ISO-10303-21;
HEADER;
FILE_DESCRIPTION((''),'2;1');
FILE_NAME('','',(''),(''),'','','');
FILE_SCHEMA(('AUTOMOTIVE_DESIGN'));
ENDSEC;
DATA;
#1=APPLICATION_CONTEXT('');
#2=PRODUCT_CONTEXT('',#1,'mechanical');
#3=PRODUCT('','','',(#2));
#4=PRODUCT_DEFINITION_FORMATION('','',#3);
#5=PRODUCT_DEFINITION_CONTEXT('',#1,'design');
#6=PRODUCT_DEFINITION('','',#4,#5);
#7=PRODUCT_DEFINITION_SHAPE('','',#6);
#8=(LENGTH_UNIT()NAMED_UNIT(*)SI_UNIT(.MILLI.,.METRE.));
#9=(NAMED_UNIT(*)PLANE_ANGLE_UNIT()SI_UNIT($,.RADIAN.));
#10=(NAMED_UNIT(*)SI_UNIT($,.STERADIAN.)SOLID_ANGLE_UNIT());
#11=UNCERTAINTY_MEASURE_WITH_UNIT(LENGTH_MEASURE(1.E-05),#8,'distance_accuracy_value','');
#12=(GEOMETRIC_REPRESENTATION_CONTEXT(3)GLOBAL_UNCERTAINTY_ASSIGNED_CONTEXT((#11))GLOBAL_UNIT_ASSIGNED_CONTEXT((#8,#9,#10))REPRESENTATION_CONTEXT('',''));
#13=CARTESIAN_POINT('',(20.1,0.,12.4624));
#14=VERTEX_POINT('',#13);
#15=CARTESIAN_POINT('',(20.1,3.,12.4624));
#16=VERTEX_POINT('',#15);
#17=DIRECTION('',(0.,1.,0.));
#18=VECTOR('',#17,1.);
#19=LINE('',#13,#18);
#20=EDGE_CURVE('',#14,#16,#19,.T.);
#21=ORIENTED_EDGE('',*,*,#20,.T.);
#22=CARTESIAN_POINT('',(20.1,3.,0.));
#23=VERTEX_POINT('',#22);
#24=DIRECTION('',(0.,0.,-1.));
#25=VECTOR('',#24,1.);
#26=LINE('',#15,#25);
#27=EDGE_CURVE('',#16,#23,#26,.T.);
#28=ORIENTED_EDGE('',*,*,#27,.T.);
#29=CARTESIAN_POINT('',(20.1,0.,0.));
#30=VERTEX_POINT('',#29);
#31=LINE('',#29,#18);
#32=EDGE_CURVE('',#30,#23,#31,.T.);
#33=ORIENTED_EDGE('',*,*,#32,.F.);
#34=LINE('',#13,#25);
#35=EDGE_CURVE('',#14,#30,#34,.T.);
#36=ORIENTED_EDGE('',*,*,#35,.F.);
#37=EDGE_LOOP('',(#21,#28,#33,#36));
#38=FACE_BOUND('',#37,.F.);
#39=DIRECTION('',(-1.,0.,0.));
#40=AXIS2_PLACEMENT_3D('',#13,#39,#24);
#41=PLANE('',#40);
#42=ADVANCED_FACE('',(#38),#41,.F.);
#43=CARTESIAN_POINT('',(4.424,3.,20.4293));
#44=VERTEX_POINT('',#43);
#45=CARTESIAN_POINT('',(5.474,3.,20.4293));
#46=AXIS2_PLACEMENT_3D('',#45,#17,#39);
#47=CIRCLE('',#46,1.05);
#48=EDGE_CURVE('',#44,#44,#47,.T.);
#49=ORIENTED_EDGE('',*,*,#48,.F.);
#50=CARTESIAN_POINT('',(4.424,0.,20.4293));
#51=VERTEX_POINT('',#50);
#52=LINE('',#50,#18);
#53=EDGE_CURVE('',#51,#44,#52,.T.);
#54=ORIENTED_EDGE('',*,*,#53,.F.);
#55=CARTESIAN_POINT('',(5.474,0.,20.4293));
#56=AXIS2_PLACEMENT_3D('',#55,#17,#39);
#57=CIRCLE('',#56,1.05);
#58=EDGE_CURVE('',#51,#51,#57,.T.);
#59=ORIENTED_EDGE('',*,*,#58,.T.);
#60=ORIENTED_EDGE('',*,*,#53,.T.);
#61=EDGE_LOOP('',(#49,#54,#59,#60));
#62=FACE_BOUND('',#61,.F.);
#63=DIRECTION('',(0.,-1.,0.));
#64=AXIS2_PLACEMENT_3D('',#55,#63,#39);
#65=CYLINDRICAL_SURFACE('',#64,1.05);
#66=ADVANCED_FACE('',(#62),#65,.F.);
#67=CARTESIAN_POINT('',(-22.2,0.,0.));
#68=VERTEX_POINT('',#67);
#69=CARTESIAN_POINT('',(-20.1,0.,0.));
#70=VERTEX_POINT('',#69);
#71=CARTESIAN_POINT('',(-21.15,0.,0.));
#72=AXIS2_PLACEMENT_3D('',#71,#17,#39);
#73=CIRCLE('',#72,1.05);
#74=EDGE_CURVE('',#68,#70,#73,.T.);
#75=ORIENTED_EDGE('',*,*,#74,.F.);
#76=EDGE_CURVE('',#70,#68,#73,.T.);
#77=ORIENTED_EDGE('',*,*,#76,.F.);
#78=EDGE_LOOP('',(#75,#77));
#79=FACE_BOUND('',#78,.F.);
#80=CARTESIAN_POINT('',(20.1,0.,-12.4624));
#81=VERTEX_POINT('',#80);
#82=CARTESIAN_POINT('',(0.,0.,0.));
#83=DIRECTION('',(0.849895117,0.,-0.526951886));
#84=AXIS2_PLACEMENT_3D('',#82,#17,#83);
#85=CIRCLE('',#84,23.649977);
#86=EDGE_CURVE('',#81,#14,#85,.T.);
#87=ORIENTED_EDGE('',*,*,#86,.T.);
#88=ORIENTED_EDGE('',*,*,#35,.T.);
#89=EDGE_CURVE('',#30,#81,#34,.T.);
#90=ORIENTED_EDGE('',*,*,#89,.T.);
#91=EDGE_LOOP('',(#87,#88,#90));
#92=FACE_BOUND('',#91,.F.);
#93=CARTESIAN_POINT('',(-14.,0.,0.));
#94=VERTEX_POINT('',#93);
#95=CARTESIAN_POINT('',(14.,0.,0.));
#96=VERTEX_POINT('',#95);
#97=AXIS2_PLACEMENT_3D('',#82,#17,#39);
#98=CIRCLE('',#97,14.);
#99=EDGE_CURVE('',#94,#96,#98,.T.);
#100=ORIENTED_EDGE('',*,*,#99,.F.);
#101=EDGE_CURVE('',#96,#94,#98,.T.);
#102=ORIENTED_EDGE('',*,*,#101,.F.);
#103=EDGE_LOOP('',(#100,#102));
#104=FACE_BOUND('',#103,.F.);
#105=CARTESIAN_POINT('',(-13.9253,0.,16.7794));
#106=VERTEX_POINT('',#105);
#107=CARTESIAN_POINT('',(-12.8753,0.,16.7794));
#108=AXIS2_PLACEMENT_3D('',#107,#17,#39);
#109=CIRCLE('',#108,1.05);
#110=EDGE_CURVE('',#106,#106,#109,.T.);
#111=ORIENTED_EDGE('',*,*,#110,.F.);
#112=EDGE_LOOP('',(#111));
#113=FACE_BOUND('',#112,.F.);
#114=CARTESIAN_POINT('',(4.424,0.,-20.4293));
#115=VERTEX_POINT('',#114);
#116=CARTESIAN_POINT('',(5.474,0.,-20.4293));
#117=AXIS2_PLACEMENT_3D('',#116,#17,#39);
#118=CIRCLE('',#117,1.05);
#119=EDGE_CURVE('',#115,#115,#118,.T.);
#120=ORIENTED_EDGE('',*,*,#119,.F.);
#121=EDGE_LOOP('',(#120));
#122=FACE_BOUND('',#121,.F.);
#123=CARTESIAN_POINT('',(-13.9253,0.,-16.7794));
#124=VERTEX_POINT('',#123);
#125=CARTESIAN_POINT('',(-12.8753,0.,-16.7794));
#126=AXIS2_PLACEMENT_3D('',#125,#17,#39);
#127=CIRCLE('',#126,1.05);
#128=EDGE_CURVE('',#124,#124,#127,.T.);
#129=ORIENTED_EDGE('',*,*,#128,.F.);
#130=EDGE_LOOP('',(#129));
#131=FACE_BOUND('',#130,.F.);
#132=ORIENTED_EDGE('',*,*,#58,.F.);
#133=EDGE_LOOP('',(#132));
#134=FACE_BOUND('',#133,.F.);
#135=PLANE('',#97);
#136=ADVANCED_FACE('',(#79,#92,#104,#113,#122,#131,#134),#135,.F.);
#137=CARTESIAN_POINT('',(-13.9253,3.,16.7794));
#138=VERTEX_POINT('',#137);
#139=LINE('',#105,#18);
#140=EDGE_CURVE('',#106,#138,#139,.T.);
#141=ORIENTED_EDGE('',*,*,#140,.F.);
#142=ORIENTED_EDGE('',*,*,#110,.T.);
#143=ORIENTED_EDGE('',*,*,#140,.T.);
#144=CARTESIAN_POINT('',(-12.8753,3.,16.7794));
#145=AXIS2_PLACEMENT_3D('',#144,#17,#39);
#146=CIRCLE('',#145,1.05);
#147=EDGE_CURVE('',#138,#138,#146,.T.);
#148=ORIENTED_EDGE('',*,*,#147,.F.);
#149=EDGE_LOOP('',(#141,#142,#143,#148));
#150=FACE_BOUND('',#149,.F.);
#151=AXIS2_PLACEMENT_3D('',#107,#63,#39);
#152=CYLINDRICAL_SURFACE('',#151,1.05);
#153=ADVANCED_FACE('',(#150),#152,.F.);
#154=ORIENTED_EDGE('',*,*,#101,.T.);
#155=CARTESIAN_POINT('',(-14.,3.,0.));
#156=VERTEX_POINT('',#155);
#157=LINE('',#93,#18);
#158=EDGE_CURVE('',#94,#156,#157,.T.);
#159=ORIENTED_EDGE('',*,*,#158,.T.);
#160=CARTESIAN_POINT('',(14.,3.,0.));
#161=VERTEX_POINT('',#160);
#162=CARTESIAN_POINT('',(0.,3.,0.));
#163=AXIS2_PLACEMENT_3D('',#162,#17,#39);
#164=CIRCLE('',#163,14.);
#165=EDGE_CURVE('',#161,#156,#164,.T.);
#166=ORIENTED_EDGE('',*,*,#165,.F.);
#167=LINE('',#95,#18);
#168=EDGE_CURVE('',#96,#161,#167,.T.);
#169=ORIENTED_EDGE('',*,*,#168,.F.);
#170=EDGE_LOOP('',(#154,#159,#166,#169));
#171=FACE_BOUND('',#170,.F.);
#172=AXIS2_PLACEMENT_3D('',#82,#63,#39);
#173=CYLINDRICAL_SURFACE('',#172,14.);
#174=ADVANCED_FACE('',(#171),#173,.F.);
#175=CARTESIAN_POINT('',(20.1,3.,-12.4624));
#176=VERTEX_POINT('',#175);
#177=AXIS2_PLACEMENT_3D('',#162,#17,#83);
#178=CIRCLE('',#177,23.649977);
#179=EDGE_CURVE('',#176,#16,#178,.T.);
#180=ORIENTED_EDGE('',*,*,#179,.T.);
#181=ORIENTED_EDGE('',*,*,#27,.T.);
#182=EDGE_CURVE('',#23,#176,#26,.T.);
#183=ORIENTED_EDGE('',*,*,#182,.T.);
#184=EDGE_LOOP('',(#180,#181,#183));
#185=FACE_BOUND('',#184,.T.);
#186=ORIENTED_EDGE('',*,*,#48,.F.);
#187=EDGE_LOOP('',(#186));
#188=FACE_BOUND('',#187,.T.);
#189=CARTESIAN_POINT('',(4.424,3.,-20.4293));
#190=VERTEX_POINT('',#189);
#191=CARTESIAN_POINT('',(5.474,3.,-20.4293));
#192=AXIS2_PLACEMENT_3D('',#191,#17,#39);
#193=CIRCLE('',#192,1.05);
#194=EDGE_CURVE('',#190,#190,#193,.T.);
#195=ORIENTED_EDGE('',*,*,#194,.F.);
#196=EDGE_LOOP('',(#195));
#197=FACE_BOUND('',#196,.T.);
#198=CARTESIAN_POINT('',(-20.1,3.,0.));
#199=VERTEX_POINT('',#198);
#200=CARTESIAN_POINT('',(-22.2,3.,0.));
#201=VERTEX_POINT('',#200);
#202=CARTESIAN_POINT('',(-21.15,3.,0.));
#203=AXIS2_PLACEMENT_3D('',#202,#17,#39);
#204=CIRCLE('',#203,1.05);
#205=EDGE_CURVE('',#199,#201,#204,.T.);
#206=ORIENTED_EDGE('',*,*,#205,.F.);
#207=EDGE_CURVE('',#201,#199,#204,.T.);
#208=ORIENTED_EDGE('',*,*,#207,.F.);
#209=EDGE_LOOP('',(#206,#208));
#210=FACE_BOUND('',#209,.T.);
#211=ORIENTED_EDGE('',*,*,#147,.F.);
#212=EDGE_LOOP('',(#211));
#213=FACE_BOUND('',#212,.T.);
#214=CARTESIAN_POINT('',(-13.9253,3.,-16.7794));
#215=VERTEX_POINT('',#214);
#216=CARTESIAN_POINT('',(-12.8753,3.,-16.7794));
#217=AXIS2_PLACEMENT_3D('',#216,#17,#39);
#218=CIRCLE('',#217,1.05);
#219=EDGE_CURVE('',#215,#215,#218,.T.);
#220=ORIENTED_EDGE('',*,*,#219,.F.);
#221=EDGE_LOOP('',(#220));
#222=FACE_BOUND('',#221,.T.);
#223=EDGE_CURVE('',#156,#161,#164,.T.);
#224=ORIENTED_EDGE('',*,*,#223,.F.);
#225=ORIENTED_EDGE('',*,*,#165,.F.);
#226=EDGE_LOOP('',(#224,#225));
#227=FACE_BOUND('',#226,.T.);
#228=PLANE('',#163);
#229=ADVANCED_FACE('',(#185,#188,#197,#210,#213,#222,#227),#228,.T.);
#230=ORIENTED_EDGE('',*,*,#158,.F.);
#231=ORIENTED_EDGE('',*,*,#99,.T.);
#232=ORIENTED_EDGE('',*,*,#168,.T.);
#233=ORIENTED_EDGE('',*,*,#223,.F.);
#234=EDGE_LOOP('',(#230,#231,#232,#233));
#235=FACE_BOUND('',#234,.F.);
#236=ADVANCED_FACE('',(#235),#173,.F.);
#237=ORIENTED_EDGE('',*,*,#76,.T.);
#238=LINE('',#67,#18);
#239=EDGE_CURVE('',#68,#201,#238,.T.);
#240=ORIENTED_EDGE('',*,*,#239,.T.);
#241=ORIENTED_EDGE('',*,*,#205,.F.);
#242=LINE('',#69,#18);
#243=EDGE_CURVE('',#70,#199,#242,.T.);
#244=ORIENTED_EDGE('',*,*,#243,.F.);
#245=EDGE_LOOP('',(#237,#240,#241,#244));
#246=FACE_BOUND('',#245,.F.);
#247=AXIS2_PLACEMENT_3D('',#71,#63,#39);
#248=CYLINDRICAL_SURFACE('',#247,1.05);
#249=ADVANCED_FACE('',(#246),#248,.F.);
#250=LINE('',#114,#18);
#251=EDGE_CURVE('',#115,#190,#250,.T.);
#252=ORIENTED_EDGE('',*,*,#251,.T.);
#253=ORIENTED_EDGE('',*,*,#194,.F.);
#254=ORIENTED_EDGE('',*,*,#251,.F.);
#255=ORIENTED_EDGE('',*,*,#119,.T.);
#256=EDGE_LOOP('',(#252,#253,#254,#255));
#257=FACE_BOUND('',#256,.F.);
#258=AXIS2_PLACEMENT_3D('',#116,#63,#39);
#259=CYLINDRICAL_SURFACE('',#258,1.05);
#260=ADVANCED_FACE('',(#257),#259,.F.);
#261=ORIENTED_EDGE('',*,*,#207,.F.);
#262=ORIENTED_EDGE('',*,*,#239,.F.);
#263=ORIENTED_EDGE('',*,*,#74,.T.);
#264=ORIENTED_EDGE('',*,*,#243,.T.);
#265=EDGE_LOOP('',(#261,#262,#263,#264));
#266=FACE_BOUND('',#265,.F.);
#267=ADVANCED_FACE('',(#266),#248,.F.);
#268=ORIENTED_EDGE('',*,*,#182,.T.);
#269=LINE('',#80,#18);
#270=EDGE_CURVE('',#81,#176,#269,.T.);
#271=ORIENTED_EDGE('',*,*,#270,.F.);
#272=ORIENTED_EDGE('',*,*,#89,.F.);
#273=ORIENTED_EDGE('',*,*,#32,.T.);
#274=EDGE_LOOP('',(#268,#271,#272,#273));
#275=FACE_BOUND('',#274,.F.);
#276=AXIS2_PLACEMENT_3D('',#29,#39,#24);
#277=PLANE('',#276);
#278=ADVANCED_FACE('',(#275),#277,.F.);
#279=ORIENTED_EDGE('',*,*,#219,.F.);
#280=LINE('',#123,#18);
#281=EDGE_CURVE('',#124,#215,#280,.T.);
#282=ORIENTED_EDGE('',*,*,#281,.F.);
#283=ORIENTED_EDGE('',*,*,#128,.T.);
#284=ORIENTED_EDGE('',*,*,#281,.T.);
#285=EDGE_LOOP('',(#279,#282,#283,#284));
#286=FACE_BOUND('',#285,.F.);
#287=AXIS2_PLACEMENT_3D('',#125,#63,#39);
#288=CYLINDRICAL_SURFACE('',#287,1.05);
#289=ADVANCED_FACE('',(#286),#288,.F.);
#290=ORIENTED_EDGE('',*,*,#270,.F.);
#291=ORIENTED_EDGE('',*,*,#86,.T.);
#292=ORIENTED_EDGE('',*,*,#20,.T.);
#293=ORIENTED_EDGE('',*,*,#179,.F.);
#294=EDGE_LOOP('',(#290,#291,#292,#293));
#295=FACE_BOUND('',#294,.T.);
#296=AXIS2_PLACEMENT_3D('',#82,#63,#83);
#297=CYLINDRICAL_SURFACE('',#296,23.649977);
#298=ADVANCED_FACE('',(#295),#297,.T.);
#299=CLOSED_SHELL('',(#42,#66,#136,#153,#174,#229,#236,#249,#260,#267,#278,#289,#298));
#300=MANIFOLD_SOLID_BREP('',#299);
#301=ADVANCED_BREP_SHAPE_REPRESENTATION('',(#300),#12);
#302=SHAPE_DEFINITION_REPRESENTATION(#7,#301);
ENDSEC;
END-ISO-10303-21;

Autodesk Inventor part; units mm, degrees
ref_plane "YZ Plane" through (0, 0, 0) normal (1, 0, 0) x (0, 1, 0)
ref_plane "XZ Plane" through (0, 0, 0) normal (0, 1, 0) x (-1, 0, 0)
ref_plane "XY Plane" through (0, 0, 0) normal (0, 0, 1) x (1, 0, 0)
sketch "Эскиз1" plane through (0, 0, 0) normal (0, 1, 0) x (-1, 0, 0)
  circle A0 centre (0, 0) radius 14
  arc A1 (-20.1, -12.4624) -> (-20.1, 12.4624) centre (0, 0) ccw
  line L0 (-20.1, 12.4624) -> (-20.1, -12.4624)
  line L1 (-20.1, 0) -> (21.15, 0)
  circle A2 centre (21.15, 0) radius 1.05
  circle A3 centre (12.8753, 16.7794) radius 1.05
  circle A4 centre (-5.474, 20.4293) radius 1.05
  circle A5 centre (12.8753, -16.7794) radius 1.05
  circle A6 centre (-5.474, -20.4293) radius 1.05
  dimension "d0" = 28
  dimension "d1" = 47.3
  dimension "d3" = 2.1
  dimension "d4" = 21.15
  dimension "d11" = 20.1
  dimension "d24" = 105
  dimension "d28" = 105
extrude "Выдавливание3" add sketch "Эскиз1" along normal blind 3
properties part number "держалка подша"
